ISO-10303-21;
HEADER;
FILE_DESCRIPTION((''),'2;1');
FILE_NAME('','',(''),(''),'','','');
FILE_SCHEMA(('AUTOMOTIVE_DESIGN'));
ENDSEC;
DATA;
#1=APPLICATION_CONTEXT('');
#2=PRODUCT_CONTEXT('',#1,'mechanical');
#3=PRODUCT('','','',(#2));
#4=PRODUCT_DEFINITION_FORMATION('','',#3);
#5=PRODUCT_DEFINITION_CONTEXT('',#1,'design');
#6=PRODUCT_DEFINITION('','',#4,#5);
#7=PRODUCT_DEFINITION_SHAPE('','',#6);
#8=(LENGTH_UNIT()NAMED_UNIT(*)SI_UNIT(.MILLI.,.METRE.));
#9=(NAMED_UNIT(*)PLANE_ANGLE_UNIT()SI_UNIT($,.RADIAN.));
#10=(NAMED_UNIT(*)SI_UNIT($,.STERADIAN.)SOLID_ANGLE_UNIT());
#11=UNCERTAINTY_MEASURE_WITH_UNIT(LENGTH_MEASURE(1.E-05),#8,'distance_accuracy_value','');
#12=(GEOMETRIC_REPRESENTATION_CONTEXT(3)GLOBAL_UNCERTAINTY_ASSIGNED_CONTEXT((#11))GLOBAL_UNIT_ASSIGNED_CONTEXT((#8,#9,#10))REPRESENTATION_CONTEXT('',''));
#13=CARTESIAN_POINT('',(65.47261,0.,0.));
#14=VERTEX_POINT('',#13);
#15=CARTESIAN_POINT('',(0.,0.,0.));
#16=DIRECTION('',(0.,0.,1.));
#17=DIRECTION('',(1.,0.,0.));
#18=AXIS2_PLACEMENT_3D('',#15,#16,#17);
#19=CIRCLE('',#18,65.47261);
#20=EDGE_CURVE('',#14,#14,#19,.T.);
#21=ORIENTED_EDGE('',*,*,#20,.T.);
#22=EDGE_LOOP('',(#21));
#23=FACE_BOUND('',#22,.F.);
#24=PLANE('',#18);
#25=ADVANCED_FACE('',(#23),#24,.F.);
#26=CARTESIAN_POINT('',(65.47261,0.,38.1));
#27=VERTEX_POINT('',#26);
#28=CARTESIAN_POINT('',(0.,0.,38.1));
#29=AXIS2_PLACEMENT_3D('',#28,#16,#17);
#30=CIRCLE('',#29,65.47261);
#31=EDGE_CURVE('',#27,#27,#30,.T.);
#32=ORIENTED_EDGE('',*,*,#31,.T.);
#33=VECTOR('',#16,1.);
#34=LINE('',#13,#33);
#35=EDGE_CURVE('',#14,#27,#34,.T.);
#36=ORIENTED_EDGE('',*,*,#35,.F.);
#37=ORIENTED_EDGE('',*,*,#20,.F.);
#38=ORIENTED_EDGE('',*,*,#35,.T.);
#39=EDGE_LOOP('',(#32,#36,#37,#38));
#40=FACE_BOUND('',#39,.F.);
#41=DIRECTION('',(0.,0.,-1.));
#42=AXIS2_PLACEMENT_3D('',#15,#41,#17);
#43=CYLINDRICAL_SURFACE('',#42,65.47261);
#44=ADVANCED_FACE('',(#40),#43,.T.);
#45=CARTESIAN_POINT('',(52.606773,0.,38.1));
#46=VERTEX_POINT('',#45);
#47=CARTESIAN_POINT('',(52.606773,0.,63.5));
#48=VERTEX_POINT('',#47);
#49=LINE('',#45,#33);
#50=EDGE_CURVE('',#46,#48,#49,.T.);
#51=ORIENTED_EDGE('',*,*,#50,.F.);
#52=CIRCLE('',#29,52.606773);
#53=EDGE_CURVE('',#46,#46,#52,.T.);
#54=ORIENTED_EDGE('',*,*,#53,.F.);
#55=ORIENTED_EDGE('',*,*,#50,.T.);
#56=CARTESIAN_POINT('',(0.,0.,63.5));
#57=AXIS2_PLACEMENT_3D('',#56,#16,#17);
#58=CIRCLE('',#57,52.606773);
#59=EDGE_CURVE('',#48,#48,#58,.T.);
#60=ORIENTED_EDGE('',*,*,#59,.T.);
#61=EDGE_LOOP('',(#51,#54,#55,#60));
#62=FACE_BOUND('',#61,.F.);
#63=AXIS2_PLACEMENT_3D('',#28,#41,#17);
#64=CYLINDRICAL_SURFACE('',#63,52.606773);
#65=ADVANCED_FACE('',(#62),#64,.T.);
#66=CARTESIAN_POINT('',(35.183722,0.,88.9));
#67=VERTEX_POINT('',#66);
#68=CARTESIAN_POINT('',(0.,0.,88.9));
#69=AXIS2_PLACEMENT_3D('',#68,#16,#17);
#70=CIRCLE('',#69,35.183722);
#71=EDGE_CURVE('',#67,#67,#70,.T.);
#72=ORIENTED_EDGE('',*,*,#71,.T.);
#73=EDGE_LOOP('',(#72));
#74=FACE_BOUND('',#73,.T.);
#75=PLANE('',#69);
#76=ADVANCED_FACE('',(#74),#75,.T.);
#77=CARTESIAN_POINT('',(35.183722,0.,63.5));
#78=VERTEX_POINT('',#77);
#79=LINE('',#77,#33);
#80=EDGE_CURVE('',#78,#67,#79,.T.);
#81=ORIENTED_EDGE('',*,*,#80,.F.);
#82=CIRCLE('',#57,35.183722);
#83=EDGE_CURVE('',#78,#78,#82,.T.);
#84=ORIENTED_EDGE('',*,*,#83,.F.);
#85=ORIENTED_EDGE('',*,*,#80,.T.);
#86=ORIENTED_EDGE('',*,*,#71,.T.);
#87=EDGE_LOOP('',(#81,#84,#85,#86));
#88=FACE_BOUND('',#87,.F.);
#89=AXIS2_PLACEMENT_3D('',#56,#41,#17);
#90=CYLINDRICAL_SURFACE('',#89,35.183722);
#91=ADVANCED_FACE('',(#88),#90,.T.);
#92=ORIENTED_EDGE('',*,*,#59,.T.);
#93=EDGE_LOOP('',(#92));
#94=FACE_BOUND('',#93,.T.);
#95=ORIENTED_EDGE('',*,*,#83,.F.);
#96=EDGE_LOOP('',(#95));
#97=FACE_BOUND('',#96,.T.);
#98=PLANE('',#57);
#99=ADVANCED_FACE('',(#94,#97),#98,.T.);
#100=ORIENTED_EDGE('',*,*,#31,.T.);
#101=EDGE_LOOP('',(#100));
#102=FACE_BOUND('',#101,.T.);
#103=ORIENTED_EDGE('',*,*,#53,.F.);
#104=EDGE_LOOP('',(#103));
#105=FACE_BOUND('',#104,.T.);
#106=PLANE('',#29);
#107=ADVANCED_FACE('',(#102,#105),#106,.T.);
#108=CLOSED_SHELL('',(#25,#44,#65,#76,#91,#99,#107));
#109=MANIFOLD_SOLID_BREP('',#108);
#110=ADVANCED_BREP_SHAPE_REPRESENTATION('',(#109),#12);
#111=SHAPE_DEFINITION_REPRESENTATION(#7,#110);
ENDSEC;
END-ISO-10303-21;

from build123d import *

# Parameters (mm, degrees)
F0_R     = 65.4726096666
F1_DEPTH = 38.1
F2_R     = 52.6067732991
F3_DEPTH = 25.4
F4_R     = 35.1837218131
F5_DEPTH = 25.4


# Not quite as in the source:
# - the program builds the solid bodies; features that only make, move or delete a surface that nothing else refers to are left out


with BuildPart() as f1:
    # F0 (on Top) → F1 (new body)
    with BuildSketch(Plane.XY):
        Circle(F0_R)
    extrude(amount=F1_DEPTH)

    # F2 (on face) → F3 (join)
    with BuildSketch(Plane.XY.offset(38.1)):
        Circle(F2_R)
    extrude(amount=F3_DEPTH)

    # F4 (on face) → F5 (join)
    with BuildSketch(Plane.XY.offset(63.5)):
        Circle(F4_R)
    extrude(amount=F5_DEPTH)


solid = f1.part
